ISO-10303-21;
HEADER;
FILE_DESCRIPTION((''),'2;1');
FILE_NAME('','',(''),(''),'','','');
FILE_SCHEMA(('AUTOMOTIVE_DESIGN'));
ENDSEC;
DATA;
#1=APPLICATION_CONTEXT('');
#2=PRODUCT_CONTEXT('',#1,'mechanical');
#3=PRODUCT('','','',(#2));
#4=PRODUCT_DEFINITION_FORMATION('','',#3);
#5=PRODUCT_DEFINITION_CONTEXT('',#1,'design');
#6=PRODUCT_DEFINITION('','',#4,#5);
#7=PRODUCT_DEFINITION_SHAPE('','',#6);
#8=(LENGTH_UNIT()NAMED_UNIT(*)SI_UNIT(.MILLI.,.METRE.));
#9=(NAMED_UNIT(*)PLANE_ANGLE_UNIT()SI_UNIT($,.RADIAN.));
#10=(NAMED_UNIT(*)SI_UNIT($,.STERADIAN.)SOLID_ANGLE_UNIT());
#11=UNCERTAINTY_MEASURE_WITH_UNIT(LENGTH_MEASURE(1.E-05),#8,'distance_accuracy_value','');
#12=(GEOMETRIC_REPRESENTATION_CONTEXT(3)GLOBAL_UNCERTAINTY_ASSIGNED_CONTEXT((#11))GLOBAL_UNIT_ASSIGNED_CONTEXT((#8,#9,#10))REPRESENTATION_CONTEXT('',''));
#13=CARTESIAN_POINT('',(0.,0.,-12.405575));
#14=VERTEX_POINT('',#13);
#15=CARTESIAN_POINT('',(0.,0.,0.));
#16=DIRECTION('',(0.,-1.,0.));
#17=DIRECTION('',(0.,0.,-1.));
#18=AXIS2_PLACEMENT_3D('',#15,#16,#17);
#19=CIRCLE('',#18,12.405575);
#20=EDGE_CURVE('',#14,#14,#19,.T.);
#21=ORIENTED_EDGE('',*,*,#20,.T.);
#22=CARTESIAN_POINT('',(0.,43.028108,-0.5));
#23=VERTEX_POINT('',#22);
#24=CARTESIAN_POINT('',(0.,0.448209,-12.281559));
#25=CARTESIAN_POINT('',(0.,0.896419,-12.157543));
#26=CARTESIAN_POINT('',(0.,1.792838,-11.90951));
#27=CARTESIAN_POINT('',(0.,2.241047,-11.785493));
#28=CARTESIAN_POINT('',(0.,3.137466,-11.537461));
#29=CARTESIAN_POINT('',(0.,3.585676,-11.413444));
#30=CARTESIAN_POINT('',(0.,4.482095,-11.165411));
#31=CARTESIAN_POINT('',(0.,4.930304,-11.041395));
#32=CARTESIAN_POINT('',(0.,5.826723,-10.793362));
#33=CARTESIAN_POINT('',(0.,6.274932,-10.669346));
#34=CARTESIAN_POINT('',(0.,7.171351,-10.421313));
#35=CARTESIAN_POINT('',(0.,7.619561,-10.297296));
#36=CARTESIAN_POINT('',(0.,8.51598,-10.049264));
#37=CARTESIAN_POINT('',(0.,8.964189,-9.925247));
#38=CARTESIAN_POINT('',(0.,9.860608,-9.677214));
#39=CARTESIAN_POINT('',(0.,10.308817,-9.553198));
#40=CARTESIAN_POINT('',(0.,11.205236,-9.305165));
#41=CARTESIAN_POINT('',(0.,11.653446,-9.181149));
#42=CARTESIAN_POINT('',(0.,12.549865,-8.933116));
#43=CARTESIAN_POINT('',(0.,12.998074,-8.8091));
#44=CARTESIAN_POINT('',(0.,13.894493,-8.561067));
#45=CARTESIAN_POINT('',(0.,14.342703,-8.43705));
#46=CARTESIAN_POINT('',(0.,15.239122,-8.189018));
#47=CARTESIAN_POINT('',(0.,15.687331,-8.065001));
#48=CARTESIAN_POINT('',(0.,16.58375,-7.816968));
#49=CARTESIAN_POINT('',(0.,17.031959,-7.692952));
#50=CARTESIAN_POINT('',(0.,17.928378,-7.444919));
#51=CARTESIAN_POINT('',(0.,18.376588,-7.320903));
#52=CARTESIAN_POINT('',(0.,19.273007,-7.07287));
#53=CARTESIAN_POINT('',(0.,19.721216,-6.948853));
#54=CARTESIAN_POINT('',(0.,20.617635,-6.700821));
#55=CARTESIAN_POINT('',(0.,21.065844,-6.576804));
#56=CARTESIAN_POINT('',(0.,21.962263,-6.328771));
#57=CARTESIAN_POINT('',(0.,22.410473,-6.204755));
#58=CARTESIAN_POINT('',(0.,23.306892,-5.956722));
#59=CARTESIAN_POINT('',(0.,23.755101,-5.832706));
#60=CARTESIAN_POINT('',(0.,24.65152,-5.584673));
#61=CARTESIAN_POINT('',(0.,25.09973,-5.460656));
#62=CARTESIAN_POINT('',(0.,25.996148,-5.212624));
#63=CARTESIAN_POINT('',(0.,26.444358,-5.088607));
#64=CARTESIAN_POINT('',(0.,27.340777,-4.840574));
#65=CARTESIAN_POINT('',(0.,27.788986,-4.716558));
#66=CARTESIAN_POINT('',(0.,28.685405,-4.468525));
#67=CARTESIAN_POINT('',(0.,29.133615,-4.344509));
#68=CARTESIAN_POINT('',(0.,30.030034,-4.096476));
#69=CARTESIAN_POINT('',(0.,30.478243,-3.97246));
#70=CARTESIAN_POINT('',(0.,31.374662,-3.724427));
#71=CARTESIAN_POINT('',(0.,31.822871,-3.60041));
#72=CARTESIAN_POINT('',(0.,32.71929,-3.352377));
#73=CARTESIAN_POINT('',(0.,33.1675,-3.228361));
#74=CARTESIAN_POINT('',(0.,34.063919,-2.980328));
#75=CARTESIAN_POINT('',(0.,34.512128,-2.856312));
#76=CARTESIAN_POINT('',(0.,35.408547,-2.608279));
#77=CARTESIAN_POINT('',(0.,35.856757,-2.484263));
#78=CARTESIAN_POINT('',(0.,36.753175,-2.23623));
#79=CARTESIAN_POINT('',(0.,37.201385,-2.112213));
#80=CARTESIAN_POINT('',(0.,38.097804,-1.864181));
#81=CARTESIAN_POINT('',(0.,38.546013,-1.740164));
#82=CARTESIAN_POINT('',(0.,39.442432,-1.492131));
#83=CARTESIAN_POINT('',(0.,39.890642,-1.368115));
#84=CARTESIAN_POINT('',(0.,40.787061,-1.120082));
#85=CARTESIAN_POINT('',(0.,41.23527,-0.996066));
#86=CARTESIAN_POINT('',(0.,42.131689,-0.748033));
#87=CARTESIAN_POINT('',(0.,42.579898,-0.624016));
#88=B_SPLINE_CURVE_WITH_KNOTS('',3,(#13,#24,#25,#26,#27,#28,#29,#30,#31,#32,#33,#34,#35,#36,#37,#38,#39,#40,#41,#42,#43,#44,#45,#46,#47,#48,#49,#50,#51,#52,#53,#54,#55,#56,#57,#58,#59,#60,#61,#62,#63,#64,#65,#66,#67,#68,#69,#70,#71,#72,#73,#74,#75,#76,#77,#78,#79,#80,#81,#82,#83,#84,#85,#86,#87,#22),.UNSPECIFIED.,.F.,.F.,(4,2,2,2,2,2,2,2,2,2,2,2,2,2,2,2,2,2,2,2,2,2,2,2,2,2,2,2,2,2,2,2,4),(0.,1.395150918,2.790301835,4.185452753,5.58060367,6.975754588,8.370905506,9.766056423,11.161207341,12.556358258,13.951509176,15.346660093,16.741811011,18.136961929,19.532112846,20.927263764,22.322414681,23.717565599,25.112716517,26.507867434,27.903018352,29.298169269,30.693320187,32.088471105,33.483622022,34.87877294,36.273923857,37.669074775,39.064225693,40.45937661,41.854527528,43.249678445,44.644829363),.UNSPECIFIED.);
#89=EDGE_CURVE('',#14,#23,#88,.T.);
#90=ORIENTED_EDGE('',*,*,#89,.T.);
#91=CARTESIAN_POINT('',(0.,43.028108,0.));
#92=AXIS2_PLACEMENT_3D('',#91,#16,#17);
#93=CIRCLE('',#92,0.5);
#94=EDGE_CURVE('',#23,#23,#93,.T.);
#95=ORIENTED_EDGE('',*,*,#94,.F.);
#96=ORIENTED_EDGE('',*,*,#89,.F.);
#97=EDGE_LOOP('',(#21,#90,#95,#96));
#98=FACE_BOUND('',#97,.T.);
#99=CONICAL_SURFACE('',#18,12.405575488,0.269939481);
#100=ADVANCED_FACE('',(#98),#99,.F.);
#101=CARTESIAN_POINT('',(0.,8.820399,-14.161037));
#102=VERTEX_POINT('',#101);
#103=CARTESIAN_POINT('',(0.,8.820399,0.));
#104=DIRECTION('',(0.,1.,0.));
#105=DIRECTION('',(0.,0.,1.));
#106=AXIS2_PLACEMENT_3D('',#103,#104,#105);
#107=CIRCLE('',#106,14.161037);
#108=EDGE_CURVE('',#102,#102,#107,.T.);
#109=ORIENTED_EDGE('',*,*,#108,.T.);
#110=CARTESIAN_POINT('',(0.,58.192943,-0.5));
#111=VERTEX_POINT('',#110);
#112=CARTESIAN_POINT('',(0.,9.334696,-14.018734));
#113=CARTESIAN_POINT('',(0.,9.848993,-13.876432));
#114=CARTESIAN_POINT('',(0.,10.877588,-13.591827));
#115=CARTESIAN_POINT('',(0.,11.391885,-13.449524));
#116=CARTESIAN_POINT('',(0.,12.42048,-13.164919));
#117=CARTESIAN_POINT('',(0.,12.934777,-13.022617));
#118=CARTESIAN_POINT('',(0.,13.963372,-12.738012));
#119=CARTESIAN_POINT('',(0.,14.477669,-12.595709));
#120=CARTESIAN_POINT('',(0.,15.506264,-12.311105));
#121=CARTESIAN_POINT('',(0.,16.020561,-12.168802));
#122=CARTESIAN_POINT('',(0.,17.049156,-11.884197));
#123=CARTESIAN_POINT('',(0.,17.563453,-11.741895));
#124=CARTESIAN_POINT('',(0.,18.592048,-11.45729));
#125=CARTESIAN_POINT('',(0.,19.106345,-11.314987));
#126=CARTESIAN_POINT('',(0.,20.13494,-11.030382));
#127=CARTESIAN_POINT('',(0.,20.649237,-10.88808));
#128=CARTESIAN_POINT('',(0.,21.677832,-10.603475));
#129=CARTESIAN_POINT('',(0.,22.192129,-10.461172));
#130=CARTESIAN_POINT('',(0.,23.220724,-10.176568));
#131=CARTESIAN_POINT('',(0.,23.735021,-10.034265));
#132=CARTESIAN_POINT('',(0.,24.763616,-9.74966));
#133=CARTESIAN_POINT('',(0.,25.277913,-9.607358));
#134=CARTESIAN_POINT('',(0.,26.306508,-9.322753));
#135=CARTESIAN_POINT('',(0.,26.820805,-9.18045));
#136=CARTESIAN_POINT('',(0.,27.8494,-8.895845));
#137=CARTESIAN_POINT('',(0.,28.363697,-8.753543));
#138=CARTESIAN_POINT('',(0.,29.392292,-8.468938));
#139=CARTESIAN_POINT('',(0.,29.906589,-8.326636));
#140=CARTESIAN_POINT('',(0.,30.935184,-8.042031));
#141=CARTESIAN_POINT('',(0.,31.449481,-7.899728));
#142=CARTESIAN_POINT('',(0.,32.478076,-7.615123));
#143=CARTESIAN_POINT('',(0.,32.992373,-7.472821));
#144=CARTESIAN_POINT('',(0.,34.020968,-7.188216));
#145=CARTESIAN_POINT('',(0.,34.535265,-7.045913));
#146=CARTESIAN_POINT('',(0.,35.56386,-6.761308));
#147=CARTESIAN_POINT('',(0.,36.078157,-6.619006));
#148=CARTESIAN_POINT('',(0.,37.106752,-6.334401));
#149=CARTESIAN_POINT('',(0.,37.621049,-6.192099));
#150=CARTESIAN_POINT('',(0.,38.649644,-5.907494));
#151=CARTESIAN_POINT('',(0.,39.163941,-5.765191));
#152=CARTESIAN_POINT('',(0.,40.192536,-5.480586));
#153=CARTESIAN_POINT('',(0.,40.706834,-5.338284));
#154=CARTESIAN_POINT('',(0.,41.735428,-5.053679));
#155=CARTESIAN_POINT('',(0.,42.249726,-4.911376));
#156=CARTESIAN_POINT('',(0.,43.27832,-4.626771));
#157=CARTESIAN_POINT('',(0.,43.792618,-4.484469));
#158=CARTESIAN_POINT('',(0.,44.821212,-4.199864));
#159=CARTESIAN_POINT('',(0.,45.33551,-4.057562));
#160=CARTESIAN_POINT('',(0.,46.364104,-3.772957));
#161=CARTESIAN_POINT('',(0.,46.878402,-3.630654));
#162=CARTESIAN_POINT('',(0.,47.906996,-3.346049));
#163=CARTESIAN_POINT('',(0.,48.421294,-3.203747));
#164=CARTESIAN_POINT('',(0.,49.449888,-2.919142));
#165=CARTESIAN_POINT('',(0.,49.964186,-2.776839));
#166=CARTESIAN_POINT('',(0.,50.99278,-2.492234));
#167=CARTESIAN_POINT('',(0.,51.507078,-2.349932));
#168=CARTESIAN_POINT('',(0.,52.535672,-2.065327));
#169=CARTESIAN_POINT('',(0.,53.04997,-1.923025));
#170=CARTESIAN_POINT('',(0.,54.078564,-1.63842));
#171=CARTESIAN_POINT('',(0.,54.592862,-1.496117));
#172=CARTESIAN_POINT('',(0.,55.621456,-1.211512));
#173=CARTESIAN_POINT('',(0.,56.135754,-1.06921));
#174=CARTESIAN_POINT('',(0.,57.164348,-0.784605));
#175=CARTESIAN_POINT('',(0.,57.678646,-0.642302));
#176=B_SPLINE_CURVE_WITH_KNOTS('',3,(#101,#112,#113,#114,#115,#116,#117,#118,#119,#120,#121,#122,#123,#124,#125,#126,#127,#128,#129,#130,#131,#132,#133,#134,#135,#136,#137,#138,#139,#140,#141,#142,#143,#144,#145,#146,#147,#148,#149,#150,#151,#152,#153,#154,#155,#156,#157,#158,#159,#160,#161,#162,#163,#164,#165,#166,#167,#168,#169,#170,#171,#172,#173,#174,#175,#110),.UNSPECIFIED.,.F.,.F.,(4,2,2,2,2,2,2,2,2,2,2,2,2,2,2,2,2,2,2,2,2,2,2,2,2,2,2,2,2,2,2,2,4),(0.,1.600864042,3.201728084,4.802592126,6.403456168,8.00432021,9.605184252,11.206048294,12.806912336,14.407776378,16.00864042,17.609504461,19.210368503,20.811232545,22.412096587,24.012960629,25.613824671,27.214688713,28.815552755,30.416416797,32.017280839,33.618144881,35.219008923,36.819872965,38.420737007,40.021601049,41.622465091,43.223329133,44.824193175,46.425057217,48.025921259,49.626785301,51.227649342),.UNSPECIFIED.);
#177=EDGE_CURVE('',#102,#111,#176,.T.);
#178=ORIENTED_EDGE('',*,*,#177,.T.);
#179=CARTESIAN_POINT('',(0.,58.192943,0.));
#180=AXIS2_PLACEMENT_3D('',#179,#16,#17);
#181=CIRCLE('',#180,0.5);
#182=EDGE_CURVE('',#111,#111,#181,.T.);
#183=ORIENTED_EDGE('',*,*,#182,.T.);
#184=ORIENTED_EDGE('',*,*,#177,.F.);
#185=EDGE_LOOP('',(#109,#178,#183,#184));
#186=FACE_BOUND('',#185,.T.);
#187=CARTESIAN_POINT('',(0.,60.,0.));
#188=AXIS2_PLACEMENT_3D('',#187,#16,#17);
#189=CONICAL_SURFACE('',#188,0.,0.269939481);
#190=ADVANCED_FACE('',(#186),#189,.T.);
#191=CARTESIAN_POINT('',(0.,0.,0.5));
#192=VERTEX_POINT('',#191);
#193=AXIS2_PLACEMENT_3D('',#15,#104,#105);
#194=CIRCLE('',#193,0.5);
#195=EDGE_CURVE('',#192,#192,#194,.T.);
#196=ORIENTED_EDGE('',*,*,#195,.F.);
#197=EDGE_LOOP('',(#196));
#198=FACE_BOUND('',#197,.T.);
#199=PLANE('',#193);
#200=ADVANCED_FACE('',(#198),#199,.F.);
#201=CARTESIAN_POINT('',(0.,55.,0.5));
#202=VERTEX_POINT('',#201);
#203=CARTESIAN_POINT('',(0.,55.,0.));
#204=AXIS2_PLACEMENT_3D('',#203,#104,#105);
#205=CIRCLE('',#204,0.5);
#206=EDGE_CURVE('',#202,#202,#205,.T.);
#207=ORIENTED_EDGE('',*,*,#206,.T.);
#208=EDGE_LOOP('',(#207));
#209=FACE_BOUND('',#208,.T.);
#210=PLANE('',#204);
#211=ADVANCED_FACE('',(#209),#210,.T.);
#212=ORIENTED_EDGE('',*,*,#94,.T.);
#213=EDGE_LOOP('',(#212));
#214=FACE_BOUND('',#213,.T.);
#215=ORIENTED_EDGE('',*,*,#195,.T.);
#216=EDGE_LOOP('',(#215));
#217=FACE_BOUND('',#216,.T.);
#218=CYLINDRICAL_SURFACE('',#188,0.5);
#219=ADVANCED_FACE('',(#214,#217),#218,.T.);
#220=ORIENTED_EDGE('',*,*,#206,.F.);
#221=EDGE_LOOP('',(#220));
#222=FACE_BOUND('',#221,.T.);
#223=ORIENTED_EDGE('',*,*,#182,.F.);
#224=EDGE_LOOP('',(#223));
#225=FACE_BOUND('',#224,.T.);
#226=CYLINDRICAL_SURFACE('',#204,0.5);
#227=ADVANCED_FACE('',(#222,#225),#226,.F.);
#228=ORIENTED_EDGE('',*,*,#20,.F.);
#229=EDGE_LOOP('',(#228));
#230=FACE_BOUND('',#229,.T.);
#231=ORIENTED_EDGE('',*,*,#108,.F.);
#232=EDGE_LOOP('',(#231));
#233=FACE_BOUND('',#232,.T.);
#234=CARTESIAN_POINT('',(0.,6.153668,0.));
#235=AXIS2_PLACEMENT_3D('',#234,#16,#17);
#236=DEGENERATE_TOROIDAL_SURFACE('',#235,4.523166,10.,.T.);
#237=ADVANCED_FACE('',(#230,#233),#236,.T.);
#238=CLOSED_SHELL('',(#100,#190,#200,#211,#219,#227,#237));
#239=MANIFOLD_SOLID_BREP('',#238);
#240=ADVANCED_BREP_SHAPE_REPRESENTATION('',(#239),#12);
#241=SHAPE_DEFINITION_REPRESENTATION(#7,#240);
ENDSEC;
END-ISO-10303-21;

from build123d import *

# Parameters (mm, degrees)
FILLET1_R           = 10
SKETCH5_R           = 0.5
BOSS_EXTRUDE1_DEPTH = 60
CUT_EXTRUDE1_START  = -5
SKETCH7_R           = 0.5
CUT_EXTRUDE1_DEPTH  = 5


with BuildPart() as part:
    # Sketch3 → Revolve1 (revolve)
    with BuildSketch(Plane.XY, mode=Mode.PRIVATE) as revolve1_sk:
        Polygon((0, 60), (0, 44.835164835), (12.405575488, 0), (16.601578962, 0), align=None)
    revolve(revolve1_sk.sketch.rotate(Axis((0, 0, 0), (0, 1, 0)), 90), axis=Axis((0, 0, 0), (0, 1, 0)))

    # Fillet1
    # the kernel refuses this fillet: 10 mm, written as the material it takes off along each edge
    with BuildSketch(Plane(origin=(0, 0, 0), x_dir=(0, 0, -1), z_dir=(1, 0, 0))) as fillet1_piece_1:
        with BuildLine():
            CenterArc((4.523166195, 6.153667503), FILLET1_R, 322.021426145, 53.44496685)
            Line((12.405575488, 0), (12.563223674, -0.12307335))
            ThreePointArc((12.563223674, -0.12307335), (14.503577225, -0.2), (16.601578962, -0.2))
            Line((16.601578962, -0.2), (16.794336369, 0.053334622))
            Line((16.794336369, 0.053334622), (14.353793971, 8.873733224))
            Line((14.353793971, 8.873733224), (14.161036564, 8.820398602))
        make_face()
    revolve(axis=Axis((0, 0, 0), (0, 1, 0)), mode=Mode.SUBTRACT)

    # Sketch5 → Boss-Extrude1 (add)
    with BuildSketch(Plane(origin=(0, 0, 0), x_dir=(1, 0, 0), z_dir=(0, 1, 0))):
        with Locations(Location((0, 0, 0), (0, 0, 90))):
            Circle(SKETCH5_R)
    extrude(amount=BOSS_EXTRUDE1_DEPTH)

    # Sketch7 → Cut-Extrude1 (cut)
    with BuildSketch(Plane(origin=(0, 60, 0), x_dir=(1, 0, 0), z_dir=(0, 1, 0)).offset(CUT_EXTRUDE1_START)):
        with Locations(Location((0, 0, 0), (0, 0, 90))):
            Circle(SKETCH7_R)
    extrude(amount=CUT_EXTRUDE1_DEPTH, mode=Mode.SUBTRACT)


solid = part.part
